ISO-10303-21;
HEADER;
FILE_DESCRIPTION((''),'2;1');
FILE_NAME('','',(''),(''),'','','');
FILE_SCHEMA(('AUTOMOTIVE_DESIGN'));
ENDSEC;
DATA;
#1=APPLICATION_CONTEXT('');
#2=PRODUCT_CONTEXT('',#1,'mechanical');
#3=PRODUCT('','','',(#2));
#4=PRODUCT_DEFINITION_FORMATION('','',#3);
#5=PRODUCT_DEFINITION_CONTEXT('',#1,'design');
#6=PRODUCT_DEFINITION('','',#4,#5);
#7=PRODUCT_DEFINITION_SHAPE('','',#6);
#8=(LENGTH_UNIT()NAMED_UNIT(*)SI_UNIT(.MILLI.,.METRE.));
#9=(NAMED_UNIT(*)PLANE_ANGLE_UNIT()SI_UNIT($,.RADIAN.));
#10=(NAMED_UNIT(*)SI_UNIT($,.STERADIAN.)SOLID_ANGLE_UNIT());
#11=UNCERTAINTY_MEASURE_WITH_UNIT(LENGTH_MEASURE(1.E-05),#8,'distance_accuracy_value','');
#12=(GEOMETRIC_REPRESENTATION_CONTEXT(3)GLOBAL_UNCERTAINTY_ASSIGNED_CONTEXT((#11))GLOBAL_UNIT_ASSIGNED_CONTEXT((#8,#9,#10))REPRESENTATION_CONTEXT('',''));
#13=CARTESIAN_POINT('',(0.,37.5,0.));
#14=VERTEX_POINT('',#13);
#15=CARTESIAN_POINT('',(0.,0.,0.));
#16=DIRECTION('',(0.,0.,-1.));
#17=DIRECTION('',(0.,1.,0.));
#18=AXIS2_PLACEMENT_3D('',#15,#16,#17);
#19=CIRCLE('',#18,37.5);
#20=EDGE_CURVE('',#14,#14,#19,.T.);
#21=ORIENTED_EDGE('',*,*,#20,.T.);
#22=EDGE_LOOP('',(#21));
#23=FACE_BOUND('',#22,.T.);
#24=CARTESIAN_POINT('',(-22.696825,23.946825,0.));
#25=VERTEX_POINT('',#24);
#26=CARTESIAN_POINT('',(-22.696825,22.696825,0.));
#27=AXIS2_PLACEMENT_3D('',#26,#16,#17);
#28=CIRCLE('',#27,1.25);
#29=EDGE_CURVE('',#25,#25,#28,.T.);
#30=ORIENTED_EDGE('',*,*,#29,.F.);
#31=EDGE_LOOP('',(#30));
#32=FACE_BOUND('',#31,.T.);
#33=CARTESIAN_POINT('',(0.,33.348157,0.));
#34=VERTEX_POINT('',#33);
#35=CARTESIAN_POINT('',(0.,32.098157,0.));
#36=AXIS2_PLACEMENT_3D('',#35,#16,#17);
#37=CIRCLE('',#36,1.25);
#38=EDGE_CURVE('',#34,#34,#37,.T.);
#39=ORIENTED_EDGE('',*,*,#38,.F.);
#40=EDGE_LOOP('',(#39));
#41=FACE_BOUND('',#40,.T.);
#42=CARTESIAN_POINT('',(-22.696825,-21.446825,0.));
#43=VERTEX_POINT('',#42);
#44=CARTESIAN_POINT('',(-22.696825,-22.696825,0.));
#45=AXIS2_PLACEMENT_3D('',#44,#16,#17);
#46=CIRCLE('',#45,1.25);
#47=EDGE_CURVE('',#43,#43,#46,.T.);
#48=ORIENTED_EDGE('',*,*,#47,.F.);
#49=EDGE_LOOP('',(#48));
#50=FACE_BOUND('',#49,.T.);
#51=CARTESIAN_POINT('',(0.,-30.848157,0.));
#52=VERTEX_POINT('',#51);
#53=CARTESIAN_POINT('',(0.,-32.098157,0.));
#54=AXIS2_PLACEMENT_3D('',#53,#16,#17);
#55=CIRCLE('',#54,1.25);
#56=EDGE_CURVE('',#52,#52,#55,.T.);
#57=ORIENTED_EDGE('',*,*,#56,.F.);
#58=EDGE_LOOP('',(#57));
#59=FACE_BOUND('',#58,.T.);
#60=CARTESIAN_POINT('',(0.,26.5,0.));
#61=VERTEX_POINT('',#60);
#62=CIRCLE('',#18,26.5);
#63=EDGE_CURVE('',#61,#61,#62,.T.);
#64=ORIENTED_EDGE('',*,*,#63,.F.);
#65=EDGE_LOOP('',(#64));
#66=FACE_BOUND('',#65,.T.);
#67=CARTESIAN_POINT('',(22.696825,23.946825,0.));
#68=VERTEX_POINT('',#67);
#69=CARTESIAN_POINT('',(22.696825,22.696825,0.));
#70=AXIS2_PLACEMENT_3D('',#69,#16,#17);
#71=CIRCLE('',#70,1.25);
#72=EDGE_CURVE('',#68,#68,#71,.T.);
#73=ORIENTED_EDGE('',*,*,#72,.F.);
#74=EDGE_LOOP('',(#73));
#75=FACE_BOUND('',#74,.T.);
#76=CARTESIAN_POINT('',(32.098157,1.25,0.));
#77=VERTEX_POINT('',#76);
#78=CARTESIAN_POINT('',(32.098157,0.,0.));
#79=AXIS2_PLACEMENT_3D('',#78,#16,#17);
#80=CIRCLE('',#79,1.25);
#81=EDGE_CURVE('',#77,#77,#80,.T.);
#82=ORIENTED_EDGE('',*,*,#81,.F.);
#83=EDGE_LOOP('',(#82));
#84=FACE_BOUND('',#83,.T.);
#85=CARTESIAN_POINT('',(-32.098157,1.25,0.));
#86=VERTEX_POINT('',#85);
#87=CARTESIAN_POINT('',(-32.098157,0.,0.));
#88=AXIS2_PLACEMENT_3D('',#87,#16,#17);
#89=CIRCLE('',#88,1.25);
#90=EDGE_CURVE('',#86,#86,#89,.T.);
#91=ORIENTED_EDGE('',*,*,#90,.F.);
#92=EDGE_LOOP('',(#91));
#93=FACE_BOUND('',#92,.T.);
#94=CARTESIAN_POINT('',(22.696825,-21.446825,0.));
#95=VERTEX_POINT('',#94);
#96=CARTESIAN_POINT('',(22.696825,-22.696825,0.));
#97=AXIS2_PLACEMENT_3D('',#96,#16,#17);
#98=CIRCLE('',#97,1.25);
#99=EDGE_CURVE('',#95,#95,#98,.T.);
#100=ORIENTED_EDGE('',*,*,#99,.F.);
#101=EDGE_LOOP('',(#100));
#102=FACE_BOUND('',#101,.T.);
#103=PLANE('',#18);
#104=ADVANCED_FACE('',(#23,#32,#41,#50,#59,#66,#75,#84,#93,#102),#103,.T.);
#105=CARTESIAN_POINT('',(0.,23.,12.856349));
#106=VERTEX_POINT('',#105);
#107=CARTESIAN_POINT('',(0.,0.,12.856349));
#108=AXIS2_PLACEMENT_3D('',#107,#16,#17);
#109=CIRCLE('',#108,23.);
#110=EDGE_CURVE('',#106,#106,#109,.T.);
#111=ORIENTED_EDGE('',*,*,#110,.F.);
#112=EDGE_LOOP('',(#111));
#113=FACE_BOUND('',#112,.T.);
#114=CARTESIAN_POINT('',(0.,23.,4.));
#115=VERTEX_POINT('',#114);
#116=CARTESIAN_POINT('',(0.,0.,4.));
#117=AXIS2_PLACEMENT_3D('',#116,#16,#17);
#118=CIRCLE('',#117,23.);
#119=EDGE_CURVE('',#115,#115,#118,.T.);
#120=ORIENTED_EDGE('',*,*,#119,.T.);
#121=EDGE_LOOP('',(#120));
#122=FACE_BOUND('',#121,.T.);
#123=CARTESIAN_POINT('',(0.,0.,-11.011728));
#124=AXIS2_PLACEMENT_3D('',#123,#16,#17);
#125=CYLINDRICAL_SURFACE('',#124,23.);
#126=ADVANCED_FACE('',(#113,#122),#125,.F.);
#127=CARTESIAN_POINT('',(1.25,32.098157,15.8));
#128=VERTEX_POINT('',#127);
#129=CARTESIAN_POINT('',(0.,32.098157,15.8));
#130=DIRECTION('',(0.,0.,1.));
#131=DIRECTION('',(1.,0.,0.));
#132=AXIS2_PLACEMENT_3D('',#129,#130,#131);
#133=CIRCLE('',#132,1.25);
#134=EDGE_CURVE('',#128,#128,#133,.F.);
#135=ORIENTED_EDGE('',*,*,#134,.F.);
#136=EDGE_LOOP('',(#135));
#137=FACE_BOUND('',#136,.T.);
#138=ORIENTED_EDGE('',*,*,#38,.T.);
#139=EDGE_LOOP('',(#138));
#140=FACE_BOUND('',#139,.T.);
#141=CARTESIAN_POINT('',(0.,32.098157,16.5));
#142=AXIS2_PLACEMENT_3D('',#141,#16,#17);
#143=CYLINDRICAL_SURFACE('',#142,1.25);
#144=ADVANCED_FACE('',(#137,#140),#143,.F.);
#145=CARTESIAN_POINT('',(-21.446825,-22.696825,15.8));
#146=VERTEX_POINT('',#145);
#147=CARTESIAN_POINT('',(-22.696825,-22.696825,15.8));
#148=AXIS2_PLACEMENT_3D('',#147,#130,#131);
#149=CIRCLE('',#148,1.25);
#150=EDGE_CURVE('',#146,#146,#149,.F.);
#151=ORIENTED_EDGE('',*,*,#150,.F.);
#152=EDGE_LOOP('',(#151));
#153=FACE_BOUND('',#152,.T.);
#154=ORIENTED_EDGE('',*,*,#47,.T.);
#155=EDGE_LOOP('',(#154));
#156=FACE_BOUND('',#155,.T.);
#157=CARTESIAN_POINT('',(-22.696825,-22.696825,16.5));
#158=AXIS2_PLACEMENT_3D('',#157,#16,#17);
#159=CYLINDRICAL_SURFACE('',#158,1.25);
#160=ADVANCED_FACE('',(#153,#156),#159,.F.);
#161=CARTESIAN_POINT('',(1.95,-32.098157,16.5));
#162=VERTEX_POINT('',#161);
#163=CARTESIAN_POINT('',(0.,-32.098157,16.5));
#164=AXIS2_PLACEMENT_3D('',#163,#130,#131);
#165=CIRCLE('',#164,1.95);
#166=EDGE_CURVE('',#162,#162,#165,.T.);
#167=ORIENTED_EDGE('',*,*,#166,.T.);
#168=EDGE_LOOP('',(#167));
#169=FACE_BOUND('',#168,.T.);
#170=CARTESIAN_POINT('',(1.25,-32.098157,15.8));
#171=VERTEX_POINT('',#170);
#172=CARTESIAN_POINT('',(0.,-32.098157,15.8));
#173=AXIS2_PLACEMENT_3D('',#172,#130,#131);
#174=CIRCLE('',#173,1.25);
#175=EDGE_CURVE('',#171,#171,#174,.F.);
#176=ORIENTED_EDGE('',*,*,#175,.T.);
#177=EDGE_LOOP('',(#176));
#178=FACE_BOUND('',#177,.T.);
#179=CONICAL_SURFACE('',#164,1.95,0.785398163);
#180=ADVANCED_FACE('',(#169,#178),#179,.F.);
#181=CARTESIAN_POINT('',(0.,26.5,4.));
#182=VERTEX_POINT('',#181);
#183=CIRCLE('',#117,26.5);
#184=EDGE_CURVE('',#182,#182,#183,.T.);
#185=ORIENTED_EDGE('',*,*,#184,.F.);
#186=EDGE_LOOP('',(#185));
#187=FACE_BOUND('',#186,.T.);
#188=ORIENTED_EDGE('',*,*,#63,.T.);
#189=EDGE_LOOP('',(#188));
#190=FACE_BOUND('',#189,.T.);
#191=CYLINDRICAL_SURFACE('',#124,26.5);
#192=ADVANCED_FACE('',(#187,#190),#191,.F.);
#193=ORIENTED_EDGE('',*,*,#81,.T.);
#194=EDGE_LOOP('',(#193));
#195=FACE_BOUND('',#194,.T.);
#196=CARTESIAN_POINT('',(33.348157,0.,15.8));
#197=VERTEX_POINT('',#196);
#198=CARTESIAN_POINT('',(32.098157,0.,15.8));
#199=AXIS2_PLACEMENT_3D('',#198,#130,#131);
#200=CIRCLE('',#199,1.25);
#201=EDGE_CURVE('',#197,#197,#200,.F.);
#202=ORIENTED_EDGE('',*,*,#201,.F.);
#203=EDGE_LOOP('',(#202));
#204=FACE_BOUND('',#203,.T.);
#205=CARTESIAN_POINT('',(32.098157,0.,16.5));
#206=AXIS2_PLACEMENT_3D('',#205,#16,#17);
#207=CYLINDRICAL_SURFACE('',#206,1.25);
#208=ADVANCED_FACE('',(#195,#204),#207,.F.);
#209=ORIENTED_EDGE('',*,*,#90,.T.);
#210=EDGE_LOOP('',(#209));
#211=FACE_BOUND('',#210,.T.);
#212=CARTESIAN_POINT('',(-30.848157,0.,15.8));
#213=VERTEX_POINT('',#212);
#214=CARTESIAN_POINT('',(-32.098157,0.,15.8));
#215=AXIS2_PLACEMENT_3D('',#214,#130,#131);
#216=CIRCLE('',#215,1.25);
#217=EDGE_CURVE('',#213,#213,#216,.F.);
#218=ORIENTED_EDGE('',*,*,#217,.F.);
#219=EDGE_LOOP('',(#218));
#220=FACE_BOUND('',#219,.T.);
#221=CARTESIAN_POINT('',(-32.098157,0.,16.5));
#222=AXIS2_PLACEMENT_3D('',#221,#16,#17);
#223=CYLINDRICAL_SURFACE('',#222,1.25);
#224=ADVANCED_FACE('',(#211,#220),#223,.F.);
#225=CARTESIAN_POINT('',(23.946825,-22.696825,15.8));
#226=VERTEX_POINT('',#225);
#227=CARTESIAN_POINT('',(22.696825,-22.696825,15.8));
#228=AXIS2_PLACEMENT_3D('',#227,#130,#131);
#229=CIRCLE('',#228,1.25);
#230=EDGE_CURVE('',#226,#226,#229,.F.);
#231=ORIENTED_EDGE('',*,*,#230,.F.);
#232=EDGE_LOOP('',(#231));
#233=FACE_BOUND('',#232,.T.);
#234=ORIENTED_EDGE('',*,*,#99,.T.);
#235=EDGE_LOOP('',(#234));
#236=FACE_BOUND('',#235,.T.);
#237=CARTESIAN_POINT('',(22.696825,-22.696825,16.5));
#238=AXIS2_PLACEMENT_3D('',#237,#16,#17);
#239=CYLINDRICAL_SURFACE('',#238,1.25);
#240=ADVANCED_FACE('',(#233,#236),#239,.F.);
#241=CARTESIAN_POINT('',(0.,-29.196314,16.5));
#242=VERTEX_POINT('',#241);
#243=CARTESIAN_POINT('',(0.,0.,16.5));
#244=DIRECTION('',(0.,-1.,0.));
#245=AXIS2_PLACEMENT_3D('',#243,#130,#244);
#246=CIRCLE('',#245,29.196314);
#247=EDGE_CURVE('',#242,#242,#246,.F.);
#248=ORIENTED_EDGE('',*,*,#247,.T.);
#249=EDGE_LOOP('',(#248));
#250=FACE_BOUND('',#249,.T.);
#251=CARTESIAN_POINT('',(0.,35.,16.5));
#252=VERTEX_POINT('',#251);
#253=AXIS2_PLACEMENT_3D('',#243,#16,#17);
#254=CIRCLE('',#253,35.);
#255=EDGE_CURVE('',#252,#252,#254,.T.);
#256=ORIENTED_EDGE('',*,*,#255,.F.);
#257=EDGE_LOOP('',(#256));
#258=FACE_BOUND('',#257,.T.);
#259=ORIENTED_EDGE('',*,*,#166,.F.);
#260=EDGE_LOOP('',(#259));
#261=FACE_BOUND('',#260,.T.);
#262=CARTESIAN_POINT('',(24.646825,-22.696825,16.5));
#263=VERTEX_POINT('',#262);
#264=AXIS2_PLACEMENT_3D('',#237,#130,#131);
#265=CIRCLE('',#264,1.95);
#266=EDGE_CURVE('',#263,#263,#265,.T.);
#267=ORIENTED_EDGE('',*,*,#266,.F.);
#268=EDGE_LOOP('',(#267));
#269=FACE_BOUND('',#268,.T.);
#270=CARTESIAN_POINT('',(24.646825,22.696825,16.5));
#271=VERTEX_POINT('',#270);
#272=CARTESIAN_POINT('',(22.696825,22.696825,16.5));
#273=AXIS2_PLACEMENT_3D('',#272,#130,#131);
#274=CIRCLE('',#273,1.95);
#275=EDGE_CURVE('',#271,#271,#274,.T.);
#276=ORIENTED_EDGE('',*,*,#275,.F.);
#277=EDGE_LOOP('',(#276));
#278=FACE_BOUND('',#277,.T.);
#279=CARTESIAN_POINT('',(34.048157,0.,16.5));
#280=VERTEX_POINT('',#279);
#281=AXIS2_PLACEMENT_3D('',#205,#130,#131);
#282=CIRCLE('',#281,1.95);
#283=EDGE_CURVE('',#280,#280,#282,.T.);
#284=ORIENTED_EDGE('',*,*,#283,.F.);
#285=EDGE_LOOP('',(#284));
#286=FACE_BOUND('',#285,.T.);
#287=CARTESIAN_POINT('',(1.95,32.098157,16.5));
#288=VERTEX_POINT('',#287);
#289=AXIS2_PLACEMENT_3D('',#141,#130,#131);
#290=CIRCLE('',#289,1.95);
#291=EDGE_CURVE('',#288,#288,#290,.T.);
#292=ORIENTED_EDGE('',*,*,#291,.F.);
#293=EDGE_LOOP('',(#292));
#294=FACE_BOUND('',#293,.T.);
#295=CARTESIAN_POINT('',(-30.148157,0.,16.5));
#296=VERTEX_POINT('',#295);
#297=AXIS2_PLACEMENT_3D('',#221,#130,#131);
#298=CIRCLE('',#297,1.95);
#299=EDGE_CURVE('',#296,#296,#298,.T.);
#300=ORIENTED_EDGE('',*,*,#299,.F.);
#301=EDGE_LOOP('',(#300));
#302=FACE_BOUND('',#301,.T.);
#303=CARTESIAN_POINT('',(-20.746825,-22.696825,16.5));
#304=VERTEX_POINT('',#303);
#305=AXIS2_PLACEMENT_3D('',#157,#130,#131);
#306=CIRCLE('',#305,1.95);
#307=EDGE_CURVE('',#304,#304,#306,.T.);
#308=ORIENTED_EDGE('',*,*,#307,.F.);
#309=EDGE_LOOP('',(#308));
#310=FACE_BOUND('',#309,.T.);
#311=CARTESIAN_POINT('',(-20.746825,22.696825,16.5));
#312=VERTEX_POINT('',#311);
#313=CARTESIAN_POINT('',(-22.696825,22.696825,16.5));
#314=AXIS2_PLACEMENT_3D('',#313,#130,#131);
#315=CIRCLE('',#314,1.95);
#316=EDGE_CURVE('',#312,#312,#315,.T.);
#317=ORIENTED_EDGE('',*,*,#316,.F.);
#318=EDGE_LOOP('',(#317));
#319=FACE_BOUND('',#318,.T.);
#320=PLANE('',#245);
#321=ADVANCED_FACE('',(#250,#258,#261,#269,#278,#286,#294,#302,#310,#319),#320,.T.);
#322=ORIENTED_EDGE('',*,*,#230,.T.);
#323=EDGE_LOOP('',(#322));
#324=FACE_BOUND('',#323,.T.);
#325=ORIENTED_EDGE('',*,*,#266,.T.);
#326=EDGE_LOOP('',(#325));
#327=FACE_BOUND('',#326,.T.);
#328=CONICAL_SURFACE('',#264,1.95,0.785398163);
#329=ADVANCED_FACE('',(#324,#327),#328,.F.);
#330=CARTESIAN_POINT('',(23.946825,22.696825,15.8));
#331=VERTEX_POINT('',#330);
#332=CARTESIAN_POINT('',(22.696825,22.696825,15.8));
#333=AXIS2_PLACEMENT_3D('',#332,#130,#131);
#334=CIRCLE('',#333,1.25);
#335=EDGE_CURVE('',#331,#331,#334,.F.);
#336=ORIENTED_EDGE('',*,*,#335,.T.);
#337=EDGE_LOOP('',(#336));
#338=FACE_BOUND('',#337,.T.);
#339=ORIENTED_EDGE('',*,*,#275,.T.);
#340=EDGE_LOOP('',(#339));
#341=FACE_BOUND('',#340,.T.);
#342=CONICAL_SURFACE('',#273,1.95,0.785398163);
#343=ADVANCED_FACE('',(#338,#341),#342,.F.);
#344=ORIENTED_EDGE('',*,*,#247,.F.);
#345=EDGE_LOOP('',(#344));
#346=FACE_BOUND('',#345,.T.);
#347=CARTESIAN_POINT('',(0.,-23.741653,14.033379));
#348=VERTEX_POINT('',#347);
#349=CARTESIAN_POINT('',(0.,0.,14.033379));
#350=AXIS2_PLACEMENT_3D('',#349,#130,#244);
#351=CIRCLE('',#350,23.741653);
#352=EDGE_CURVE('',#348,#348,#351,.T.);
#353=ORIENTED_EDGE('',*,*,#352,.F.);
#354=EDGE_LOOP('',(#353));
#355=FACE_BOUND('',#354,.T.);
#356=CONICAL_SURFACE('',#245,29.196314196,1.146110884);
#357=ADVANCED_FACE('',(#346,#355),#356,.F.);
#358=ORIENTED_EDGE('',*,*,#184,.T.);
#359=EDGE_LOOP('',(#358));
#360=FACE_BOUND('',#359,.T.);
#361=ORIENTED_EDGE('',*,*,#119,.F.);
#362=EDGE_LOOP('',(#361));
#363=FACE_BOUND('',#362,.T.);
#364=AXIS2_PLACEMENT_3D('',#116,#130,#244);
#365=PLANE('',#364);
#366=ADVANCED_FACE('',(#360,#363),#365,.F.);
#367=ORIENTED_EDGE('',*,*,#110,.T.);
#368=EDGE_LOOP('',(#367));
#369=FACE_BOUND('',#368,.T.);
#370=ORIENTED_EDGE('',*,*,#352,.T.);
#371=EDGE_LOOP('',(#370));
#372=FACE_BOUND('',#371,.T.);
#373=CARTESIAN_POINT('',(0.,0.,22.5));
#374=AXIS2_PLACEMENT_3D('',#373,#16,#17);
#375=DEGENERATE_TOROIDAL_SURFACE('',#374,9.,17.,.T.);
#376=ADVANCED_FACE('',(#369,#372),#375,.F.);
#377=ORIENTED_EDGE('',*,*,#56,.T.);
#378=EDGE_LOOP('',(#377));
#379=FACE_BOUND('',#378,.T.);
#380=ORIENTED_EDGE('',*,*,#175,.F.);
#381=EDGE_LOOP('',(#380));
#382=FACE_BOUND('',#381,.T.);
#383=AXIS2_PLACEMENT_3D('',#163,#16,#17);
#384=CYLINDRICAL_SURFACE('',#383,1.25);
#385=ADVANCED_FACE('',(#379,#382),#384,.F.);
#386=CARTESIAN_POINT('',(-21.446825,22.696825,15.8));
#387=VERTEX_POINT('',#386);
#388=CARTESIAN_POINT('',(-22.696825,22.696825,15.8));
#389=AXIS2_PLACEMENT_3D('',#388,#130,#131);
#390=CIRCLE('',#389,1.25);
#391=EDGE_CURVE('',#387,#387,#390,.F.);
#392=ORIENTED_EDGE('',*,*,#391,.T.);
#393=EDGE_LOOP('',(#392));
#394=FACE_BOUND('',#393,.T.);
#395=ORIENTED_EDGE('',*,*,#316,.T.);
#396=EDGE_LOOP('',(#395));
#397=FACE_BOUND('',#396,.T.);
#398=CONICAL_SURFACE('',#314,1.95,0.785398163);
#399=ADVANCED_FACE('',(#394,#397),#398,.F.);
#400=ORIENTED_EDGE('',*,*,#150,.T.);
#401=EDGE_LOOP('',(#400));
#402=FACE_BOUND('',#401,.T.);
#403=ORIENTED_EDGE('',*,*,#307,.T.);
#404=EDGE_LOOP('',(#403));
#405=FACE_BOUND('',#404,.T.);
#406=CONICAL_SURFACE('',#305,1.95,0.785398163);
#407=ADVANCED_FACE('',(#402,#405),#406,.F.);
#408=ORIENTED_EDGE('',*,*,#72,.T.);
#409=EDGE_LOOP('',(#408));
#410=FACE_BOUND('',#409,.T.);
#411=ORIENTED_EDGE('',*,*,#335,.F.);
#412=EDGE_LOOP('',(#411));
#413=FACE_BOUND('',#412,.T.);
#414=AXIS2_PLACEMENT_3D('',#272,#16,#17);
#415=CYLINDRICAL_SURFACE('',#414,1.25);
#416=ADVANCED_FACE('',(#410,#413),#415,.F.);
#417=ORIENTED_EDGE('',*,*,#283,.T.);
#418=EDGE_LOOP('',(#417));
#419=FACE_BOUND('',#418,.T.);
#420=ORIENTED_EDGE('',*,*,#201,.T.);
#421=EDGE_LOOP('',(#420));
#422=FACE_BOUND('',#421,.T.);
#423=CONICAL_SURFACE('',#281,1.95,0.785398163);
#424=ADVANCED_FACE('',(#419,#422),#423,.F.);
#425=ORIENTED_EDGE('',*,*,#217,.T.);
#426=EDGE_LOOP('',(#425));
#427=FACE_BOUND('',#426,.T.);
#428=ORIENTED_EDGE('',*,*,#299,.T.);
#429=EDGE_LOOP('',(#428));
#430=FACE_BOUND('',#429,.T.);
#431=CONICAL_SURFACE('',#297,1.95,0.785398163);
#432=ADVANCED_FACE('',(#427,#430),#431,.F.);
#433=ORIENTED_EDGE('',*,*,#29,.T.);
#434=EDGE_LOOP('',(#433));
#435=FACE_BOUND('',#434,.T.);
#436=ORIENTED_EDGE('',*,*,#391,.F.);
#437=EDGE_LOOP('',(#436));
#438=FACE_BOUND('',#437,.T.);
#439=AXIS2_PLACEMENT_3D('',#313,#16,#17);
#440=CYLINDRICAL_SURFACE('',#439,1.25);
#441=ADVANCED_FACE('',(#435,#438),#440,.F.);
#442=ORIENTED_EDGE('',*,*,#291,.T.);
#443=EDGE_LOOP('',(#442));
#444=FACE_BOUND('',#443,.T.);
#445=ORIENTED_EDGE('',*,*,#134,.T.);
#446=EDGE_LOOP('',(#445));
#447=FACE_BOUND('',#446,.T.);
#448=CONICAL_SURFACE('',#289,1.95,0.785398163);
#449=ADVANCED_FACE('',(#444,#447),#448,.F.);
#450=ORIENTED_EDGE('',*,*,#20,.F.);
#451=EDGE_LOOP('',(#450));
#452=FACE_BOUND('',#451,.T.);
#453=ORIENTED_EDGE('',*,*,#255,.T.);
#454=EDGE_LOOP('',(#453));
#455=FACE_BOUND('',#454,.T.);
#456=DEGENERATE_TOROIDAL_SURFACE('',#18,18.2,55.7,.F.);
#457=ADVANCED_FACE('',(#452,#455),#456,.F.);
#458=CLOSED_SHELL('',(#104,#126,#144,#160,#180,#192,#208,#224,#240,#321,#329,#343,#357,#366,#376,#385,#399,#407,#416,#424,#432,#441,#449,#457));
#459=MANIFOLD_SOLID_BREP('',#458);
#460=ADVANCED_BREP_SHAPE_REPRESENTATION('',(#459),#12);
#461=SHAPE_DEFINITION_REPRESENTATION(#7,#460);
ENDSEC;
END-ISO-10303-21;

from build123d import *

# Parameters (mm, degrees)
FASE1_SIZE                                           = 4.290340475
SKIZZE11_R                                           = 22.5
SCHNITT_LINEAR_AUSTRAGEN3_DEPTH                      = 56.540525909
FORMSENKUNG_F_R_M3_SENKSCHRAUBE_MIT_INNE_D           = 1.6
FORMSENKUNG_F_R_M3_SENKSCHRAUBE_MIT_INNE_DEPTH       = 22
FORMSENKUNG_F_R_M3_SENKSCHRAUBE_MIT_INNE_CSINK_D     = 3.9
FORMSENKUNG_F_R_M3_SENKSCHRAUBE_MIT_INNE_CSINK_ANGLE = 90
FORMSENKUNG_F_R_M3_SENKSCHRAUBE_MIT_INNE_TIP         = 0.480688495
SKIZZE10_R                                           = 1.25
SCHNITT_LINEAR_AUSTRAGEN2_DEPTH                      = 56.540525909


with BuildPart() as part:
    # Skizze1 → Rotation (revolve)
    with BuildSketch(Plane(origin=(0, 0, 0), x_dir=(0, 0, -1), z_dir=(1, 0, 0))):
        with BuildLine():
            Line((0, 26), (0, 37.5))
            ThreePointArc((0, 37.5), (-8.344159634, 36.871453585), (-16.5, 35))
            Line((-16.5, 35), (-16.5, 24.905973721))
            ThreePointArc((-16.5, 24.905973721), (-12.407631733, 22.680062235), (-9.073139558, 19.426860442))
            Line((-9.073139558, 19.426860442), (-6, 22.5))
            Line((-6, 22.5), (-4, 22.5))
            Line((-4, 22.5), (-4, 26))
            Line((-4, 26), (0, 26))
        make_face()
    revolve(axis=Axis((0, 0, -11.01172812), (0, 0, 1)))

    # Fase1
    # the kernel refuses this chamfer: 4.290340475, 2.5 mm, written as the material it takes off along each edge
    with BuildSketch(Plane(origin=(0, 0, 16.5), x_dir=(0, 1, 0), z_dir=(1, 0, 0))) as fase1_piece_1:
        with BuildLine():
            Line((24.905973721 + FASE1_SIZE, 0), (23.741652955, -2.466620822))
            ThreePointArc((23.741652955, -2.466620822), (24.345172312, -1.316125117), (24.905973721, 0))
            Line((24.905973721, 0), (24.905973721 + FASE1_SIZE, 0))
        make_face()
    revolve(axis=Axis((0, 0, 16.5), (0, 0, 1)), mode=Mode.SUBTRACT)

    # Skizze11 → Schnitt-Linear austragen3 (cut, through all)
    with BuildSketch(Plane(origin=(0, 0, 0), x_dir=(-1, 0, 0), z_dir=(0, 0, -1))):
        with Locations(Location((0, 0, 0), (0, 0, 90))):
            Circle(SKIZZE11_R)
    extrude(amount=-SCHNITT_LINEAR_AUSTRAGEN3_DEPTH, mode=Mode.SUBTRACT)

    # Skizze5 → Druck-Toleranz I (revolve, cut)
    with BuildSketch(Plane(origin=(0, 0, 0), x_dir=(0, 0, -1), z_dir=(1, 0, 0))):
        Polygon((-4, 23), (-12.856349239, 23), (-12.856349239, 0), (0, 0), (0, 26.5), (-4, 26.5), align=None)
    revolve(axis=Axis((0, 0, -11.01172812), (0, 0, 1)), mode=Mode.SUBTRACT)

    # Formsenkung f_r M3 Senkschraube mit Inne
    with Locations(Plane(origin=(0, 0, 16.5), x_dir=(-1, 0, 0), z_dir=(0, 0, 1))):
        with Locations((0, 32.098157098), (22.696824548, 22.696824548), (32.098157098, 0), (22.696824548, -22.696824548), (0, -32.098157098), (-22.696824548, -22.696824548), (-32.098157098, 0), (-22.696824548, 22.696824548)):
            CounterSinkHole(FORMSENKUNG_F_R_M3_SENKSCHRAUBE_MIT_INNE_D / 2, FORMSENKUNG_F_R_M3_SENKSCHRAUBE_MIT_INNE_CSINK_D / 2, depth=FORMSENKUNG_F_R_M3_SENKSCHRAUBE_MIT_INNE_DEPTH, counter_sink_angle=FORMSENKUNG_F_R_M3_SENKSCHRAUBE_MIT_INNE_CSINK_ANGLE)
            with Locations((0, 0, -(FORMSENKUNG_F_R_M3_SENKSCHRAUBE_MIT_INNE_DEPTH + FORMSENKUNG_F_R_M3_SENKSCHRAUBE_MIT_INNE_TIP / 2))):  # 118° drill point
                Cone(0, FORMSENKUNG_F_R_M3_SENKSCHRAUBE_MIT_INNE_D / 2, FORMSENKUNG_F_R_M3_SENKSCHRAUBE_MIT_INNE_TIP, mode=Mode.SUBTRACT)

    # Skizze10 → Schnitt-Linear austragen2 (cut, through all)
    with BuildSketch(Plane(origin=(0, 0, 0), x_dir=(-1, 0, 0), z_dir=(0, 0, -1))):
        with Locations(Location((0, 32.098157098, 0), (0, 0, 90))):
            Circle(SKIZZE10_R)
        with Locations(Location((22.696824548, 22.696824548, 0), (0, 0, 90))):
            Circle(SKIZZE10_R)
        with Locations(Location((32.098157098, 0, 0), (0, 0, 90))):
            Circle(SKIZZE10_R)
        with Locations(Location((-22.696824548, 22.696824548, 0), (0, 0, 90))):
            Circle(SKIZZE10_R)
        with Locations(Location((-32.098157098, 0, 0), (0, 0, 90))):
            Circle(SKIZZE10_R)
        with Locations(Location((-22.696824548, -22.696824548, 0), (0, 0, 90))):
            Circle(SKIZZE10_R)
        with Locations(Location((0, -32.098157098, 0), (0, 0, 90))):
            Circle(SKIZZE10_R)
        with Locations(Location((22.696824548, -22.696824548, 0), (0, 0, 90))):
            Circle(SKIZZE10_R)
    extrude(amount=-SCHNITT_LINEAR_AUSTRAGEN2_DEPTH, mode=Mode.SUBTRACT)


solid = part.part
